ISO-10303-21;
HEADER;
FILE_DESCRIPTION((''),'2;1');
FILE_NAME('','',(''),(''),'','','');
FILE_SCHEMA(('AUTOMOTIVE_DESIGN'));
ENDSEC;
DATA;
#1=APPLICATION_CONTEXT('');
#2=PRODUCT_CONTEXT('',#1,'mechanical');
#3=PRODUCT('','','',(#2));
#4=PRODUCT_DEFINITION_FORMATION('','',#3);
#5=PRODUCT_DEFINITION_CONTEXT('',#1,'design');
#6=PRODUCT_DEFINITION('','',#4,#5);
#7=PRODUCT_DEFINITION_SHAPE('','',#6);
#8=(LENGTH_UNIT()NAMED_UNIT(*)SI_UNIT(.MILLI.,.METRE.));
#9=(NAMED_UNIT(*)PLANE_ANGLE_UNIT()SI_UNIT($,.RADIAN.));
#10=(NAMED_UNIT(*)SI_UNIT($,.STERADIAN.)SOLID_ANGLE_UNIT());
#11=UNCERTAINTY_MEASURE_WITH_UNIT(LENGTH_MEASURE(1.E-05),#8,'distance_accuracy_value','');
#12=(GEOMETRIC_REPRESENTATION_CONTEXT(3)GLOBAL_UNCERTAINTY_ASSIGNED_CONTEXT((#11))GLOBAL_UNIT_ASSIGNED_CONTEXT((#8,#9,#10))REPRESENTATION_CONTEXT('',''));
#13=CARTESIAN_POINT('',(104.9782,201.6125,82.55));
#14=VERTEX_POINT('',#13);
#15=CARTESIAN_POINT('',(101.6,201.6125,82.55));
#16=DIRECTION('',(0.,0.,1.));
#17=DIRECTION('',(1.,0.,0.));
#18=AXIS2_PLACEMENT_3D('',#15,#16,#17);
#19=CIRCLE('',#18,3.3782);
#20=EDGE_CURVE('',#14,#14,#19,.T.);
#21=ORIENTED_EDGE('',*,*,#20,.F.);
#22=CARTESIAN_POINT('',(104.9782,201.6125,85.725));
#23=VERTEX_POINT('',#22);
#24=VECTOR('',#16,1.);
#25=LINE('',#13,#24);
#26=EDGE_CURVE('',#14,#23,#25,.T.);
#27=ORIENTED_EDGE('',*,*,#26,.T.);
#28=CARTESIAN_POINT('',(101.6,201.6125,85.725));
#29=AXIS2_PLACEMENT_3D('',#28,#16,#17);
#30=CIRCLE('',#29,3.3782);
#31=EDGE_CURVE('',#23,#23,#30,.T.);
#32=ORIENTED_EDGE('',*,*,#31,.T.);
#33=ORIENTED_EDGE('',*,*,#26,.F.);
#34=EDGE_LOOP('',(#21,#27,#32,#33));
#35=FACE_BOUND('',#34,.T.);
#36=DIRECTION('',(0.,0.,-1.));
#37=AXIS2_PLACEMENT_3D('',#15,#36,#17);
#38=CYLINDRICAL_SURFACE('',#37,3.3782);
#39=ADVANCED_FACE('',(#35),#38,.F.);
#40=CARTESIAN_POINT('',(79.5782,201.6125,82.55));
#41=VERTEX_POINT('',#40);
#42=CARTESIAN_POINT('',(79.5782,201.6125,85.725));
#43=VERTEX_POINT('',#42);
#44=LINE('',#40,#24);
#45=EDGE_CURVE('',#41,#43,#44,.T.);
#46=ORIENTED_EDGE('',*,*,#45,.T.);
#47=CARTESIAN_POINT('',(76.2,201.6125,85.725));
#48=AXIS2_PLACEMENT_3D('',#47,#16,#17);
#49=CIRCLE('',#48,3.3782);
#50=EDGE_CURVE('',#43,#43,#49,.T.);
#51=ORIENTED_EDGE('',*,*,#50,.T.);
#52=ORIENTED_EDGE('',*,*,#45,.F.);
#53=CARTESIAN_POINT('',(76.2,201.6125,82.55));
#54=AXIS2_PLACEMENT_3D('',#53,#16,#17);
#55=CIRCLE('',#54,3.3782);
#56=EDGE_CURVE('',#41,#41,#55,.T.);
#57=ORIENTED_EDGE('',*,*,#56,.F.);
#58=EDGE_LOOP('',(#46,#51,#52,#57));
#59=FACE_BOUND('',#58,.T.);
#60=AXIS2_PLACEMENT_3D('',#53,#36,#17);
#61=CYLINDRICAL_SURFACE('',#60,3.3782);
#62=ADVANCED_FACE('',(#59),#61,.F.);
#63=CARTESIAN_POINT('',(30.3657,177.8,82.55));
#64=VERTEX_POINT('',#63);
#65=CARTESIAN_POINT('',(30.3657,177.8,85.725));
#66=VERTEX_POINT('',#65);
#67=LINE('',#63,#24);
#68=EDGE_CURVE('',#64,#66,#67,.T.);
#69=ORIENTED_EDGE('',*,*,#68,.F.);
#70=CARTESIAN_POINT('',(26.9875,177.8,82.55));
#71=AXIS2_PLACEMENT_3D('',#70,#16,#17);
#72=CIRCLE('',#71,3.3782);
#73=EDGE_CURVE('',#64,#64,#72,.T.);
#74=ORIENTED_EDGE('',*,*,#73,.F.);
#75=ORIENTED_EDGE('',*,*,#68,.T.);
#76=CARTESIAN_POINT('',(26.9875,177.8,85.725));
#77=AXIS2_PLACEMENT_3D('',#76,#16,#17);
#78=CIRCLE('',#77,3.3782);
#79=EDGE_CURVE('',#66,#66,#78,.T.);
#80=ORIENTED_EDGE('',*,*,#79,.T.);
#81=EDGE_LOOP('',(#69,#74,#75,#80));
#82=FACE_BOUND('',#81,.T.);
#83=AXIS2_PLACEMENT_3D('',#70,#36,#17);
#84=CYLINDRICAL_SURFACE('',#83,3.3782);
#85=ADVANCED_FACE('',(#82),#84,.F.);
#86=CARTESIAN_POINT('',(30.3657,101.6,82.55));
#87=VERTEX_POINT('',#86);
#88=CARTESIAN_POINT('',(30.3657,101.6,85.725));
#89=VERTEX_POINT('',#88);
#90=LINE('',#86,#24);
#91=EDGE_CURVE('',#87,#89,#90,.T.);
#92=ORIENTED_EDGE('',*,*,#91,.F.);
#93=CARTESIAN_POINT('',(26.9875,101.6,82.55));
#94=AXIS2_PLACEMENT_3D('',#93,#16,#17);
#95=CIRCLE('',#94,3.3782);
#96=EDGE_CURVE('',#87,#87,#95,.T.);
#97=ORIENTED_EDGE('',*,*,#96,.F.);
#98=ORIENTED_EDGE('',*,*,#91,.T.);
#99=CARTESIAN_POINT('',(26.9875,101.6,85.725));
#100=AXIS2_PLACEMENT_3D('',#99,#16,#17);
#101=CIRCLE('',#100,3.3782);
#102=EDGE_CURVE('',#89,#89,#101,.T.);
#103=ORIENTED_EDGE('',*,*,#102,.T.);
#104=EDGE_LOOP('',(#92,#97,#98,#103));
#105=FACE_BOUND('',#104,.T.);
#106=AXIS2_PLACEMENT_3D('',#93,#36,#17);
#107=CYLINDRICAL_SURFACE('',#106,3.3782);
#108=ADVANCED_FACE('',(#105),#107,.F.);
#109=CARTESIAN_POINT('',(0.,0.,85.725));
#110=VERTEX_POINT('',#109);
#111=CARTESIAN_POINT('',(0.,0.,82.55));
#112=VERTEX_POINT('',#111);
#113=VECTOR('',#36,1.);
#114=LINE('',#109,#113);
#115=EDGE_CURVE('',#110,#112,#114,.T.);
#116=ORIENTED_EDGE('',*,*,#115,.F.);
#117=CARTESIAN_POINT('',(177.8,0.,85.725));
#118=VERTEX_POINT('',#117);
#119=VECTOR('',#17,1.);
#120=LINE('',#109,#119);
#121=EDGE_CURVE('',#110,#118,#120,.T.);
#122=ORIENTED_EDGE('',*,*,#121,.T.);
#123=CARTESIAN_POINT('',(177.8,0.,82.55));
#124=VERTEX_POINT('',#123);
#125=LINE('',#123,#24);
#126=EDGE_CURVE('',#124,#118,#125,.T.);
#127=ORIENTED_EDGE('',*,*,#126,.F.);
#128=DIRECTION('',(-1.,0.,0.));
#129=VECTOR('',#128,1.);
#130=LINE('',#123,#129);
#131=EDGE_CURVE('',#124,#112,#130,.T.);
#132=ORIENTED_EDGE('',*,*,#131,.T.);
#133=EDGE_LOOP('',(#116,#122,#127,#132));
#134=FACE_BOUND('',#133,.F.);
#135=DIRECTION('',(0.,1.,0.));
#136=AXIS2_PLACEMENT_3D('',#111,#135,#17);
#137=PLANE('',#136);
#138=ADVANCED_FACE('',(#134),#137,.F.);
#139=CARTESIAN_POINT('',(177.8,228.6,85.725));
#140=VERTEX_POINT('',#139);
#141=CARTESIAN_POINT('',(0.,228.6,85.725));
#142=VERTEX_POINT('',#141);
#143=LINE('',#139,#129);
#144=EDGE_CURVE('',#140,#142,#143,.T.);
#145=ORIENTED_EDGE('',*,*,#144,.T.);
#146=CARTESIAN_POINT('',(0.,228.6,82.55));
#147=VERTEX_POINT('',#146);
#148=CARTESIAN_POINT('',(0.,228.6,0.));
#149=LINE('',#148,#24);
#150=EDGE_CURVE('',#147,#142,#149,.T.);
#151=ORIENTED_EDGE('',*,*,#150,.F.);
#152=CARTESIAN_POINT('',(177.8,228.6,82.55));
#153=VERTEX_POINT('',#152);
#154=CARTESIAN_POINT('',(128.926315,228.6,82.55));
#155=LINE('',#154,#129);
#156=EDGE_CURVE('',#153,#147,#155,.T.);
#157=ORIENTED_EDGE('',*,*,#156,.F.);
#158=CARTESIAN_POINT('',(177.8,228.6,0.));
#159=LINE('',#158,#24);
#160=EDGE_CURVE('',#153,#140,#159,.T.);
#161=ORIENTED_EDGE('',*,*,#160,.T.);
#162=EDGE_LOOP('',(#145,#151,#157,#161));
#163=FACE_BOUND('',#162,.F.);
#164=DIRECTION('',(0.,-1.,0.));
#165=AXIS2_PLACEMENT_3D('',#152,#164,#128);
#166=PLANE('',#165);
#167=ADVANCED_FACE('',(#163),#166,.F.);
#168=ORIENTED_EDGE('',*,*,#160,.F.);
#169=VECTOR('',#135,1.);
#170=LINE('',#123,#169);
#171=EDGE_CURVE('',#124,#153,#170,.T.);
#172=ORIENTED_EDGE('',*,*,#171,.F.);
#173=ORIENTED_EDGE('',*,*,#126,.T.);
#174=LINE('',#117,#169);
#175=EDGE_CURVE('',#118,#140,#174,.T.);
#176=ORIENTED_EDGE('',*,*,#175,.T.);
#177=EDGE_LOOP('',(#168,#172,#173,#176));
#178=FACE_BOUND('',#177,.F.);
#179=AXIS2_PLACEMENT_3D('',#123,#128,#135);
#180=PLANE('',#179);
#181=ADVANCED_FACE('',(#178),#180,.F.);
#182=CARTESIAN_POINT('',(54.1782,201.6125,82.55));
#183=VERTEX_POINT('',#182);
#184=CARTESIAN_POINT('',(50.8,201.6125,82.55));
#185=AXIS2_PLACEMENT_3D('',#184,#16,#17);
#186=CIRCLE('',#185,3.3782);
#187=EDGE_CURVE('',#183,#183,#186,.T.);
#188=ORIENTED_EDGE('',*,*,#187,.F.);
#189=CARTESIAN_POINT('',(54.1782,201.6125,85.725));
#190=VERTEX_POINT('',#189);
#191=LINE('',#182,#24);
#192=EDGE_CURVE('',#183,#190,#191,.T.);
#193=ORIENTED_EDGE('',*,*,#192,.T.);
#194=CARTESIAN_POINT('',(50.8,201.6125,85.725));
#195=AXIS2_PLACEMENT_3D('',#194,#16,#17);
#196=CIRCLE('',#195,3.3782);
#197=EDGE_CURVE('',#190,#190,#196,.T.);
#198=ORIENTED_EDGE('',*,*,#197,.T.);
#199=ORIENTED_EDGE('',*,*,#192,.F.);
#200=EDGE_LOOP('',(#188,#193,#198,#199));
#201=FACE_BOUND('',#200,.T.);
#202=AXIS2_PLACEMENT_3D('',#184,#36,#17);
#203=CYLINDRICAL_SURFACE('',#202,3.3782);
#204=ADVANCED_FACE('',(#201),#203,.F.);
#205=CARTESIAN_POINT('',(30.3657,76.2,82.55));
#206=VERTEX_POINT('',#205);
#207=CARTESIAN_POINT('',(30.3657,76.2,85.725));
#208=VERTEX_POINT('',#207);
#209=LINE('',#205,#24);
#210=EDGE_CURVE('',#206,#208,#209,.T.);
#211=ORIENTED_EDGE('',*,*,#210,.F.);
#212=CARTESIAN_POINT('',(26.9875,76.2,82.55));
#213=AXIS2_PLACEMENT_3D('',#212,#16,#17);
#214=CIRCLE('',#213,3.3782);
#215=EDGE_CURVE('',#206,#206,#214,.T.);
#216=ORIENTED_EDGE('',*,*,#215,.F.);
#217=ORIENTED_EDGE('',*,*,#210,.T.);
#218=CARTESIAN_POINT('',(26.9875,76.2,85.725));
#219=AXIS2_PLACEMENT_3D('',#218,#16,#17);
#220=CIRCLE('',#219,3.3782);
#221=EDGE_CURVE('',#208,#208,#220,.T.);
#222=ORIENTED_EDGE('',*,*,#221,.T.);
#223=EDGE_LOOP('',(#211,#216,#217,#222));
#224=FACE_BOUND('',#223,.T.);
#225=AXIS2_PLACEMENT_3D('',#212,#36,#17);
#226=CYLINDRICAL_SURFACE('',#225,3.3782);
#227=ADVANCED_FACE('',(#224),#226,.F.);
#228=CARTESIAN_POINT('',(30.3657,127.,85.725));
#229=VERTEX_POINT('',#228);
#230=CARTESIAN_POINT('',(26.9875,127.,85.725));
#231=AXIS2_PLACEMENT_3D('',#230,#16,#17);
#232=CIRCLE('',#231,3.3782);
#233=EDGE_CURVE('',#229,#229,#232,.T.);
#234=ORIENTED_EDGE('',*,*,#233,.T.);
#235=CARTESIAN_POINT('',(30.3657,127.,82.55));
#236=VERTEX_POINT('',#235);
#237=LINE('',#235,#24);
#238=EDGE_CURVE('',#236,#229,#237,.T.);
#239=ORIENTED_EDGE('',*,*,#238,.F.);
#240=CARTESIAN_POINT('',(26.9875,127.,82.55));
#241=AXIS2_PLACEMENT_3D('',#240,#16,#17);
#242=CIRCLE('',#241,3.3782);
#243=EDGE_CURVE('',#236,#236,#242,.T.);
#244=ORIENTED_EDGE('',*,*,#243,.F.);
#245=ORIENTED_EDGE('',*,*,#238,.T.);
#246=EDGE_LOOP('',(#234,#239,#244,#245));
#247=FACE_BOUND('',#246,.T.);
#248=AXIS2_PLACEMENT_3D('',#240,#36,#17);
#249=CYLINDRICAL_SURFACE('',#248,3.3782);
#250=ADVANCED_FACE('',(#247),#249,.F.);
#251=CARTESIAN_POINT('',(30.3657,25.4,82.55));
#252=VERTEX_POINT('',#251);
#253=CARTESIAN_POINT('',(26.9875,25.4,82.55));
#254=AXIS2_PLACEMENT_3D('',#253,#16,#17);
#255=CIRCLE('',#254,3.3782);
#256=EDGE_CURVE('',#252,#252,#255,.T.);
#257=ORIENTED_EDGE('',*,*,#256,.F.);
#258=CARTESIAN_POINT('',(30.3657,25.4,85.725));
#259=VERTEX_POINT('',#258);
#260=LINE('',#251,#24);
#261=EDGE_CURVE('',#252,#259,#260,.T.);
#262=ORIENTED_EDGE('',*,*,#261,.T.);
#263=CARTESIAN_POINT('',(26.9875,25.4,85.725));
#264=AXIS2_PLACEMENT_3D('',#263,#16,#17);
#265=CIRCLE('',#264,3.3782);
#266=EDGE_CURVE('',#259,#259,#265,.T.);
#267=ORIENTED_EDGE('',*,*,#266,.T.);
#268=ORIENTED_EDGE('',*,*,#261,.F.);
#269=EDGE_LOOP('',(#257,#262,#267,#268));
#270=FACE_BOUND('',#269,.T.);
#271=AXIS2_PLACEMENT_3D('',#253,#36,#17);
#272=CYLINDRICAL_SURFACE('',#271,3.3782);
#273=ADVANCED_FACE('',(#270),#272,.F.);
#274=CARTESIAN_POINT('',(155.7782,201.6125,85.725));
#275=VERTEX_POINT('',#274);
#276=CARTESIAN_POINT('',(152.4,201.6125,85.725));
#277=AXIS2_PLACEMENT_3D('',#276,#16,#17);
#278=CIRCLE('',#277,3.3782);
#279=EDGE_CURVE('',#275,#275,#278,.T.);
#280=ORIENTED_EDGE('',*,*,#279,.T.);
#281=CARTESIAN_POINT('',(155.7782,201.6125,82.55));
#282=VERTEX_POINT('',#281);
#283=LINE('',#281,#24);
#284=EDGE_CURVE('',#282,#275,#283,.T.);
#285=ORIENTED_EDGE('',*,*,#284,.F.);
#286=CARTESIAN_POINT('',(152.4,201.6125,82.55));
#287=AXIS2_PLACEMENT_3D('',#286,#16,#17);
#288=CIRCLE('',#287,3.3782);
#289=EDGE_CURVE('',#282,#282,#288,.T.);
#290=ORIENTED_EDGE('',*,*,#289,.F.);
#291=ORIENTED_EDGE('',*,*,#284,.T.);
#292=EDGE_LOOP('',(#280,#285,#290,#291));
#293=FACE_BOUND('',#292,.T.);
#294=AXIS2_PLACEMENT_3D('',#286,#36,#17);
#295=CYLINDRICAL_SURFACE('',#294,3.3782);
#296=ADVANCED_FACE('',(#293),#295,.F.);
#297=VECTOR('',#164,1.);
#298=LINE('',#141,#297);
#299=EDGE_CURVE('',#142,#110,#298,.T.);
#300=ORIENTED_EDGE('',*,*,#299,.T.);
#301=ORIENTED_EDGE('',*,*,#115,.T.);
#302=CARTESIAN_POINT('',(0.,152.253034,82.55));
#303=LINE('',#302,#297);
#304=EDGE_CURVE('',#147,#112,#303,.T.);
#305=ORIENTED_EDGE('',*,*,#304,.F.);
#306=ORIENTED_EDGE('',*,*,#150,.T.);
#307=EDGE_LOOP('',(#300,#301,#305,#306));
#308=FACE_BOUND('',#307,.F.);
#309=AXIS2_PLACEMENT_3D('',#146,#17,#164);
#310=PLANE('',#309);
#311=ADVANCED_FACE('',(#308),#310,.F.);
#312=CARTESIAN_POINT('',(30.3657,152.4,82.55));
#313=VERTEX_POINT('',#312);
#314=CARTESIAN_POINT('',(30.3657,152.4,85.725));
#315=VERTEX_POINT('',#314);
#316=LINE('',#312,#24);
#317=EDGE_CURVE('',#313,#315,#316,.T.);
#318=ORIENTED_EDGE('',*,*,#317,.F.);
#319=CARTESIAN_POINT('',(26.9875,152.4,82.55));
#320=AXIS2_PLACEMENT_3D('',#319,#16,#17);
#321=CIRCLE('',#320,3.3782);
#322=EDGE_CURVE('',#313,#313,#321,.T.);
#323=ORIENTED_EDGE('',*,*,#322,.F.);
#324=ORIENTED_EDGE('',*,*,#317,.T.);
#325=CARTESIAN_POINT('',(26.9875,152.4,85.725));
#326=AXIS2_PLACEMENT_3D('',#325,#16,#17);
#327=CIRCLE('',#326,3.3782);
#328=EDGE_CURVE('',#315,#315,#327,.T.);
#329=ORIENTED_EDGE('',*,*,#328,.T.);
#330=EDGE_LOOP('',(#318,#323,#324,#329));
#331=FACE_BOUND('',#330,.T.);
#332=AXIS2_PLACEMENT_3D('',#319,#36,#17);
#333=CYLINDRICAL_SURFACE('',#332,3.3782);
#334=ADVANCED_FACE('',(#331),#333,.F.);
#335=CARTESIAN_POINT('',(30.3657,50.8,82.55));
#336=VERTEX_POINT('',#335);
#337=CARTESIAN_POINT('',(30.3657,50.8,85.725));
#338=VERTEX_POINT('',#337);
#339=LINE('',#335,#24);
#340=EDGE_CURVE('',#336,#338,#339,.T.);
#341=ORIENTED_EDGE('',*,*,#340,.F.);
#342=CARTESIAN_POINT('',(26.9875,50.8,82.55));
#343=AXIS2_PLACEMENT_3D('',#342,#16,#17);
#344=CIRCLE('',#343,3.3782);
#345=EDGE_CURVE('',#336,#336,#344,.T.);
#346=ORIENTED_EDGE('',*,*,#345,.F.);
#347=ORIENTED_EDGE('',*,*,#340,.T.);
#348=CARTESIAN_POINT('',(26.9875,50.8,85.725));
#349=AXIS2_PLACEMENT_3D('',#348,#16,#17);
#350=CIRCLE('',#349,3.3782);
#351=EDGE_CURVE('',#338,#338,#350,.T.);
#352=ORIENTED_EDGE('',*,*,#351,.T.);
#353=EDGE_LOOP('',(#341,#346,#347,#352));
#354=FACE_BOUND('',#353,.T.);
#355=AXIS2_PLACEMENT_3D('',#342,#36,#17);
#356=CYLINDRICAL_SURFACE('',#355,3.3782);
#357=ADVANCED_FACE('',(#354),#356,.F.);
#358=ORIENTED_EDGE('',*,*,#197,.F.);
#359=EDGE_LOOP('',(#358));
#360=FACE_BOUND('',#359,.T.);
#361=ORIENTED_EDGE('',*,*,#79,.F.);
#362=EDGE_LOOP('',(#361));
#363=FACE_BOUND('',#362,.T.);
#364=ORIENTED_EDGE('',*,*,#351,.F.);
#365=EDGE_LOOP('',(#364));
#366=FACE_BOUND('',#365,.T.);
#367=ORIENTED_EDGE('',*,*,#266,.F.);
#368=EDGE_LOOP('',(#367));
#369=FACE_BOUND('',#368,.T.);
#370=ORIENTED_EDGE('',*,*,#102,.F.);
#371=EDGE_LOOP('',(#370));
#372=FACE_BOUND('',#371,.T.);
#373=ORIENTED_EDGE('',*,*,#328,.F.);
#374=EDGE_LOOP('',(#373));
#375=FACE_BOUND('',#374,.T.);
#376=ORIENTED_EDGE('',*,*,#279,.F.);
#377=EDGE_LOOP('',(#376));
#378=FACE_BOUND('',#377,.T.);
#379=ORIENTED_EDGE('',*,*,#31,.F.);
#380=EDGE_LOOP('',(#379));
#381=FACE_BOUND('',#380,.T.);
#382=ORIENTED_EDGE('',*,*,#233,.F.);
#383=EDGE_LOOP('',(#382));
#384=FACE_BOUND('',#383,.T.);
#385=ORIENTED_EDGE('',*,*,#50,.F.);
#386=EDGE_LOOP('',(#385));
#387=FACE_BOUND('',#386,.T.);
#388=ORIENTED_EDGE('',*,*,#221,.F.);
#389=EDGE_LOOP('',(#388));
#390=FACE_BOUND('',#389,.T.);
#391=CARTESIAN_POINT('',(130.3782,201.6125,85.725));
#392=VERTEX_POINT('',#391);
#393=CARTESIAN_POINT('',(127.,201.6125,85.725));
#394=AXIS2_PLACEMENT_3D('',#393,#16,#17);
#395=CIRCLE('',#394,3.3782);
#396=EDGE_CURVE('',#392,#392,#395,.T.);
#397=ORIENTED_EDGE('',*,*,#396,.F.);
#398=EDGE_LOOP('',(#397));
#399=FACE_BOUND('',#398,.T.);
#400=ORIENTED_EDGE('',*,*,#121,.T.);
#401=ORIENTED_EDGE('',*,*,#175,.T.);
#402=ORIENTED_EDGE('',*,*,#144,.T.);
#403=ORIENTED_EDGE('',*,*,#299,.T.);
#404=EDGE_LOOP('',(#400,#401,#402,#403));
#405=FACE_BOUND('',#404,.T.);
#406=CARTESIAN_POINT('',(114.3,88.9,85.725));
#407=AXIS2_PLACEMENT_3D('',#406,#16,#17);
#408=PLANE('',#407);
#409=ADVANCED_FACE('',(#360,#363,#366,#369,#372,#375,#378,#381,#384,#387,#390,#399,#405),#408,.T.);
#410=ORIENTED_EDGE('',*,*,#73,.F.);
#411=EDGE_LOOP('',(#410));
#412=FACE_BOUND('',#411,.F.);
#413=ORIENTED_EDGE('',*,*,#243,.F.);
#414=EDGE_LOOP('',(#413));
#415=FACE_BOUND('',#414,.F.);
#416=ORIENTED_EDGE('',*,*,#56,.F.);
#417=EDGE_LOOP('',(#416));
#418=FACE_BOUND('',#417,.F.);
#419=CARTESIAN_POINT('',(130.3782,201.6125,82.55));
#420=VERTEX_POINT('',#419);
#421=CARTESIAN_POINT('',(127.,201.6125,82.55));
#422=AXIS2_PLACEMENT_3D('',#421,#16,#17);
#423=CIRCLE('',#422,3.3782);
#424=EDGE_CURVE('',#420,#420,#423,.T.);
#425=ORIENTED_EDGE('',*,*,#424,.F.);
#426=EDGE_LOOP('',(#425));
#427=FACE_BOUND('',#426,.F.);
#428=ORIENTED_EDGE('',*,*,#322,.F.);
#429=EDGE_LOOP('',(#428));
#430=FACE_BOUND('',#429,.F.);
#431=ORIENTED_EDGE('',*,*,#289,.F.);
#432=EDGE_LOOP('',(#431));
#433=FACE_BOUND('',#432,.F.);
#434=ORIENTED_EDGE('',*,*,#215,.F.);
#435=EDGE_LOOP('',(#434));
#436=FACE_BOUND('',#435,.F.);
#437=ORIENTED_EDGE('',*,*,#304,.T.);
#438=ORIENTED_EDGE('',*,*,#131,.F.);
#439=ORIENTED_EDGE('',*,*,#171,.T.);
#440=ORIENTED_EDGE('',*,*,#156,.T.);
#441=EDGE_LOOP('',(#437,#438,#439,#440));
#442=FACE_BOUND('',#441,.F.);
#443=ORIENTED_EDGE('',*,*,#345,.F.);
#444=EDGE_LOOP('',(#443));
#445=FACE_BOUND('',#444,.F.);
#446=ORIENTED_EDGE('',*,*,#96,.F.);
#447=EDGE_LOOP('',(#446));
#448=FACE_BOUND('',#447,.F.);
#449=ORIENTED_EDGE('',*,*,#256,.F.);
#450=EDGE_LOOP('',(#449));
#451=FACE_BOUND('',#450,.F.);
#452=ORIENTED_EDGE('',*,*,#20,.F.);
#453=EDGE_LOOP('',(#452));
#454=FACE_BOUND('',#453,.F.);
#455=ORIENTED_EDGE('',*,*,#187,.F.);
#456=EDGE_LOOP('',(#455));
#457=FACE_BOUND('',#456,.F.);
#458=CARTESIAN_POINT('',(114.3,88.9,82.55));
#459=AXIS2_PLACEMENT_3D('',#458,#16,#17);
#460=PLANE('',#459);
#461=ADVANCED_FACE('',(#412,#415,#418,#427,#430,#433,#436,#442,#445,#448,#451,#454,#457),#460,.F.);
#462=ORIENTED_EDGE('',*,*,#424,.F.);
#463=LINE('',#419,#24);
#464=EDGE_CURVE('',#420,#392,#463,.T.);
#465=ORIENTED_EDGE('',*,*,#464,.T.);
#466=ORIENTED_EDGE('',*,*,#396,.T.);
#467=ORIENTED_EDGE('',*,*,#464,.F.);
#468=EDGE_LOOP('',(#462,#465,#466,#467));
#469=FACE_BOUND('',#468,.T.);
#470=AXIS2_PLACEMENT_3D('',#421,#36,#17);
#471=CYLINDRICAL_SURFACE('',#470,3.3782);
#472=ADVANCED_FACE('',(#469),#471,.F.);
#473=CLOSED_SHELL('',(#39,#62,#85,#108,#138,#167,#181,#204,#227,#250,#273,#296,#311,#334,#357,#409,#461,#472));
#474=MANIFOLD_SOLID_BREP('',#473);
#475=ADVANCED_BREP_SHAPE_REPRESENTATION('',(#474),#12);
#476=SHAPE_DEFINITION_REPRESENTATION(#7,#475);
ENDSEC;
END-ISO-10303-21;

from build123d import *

# Parameters (mm, degrees)
F0_W      = 50.8
F0_H      = 177.8
F1_DEPTH  = 3.175
F3_DEPTH  = 76.2
F5_DEPTH  = 3.175
F7_D      = 6.7564
F7_DEPTH  = 29.21
F7_TIP    = 2.0298273432
F8_W      = 127
F8_H      = 177.8
F8_R      = 3.3782
F9_DEPTH  = 3.175
F10_W     = 247.0957003534
F10_H     = 423.9609837532
F11_DEPTH = 82.55


# Not quite as in the source:
# - an extrude ends at something that could not be found from the text; its depth is read off the source's solid


with BuildPart() as f1:
    # F0 (on Top) → F1 (new body)
    with BuildSketch(Plane.XY):
        Polygon((0, 228.6), (0, 177.8), (50.8, 177.8), (177.8, 177.8), (177.8, 228.6), align=None)
        with Locations((25.4, 88.9)):
            Rectangle(F0_W, F0_H)
    extrude(amount=F1_DEPTH)

    # F2 (on face) → F3 (join)
    with BuildSketch(Plane.XY.offset(3.175)):
        Polygon((3.175, 0), (3.175, 225.425), (177.8, 225.425), (177.8, 228.6), (0, 228.6), (0, 0), align=None)
    extrude(amount=F3_DEPTH)

    # F4 (on face) → F5 (join)
    with BuildSketch(Plane.XY.offset(79.375)):
        Polygon((177.8, 228.6), (0, 228.6), (0, 0), (3.175, 0), (3.175, 225.425), (177.8, 225.425), align=None)
        Polygon((177.8, 177.8), (177.8, 225.425), (3.175, 225.425), (3.175, 0), (50.8, 0), (50.8, 177.8), align=None)
    extrude(amount=F5_DEPTH)

    # F7
    with Locations(Plane.XY.offset(82.55)):
        with Locations((26.9875, 25.4), (26.9875, 50.8), (26.9875, 76.2), (26.9875, 101.6), (26.9875, 127), (26.9875, 152.4), (26.9875, 177.8), (50.8, 201.6125), (76.2, 201.6125), (101.6, 201.6125), (127, 201.6125), (152.4, 201.6125)):
            Hole(F7_D / 2, depth=F7_DEPTH)
            with Locations((0, 0, -(F7_DEPTH + F7_TIP / 2))):  # 118° drill point
                Cone(0, F7_D / 2, F7_TIP, mode=Mode.SUBTRACT)

    # F8 (on face) → F9 (join)
    with BuildSketch(Plane.XY.offset(82.55)):
        with Locations((114.3, 88.9)):
            Rectangle(F8_W, F8_H)
        Polygon((0, 228.6), (0, 0), (50.8, 0), (50.8, 177.8), (177.8, 177.8), (177.8, 228.6), align=None)
        with Locations((26.9875, 25.4)):
            Circle(F8_R, mode=Mode.SUBTRACT)
        with Locations((26.9875, 50.8)):
            Circle(F8_R, mode=Mode.SUBTRACT)
        with Locations((26.9875, 76.2)):
            Circle(F8_R, mode=Mode.SUBTRACT)
        with Locations((26.9875, 101.6)):
            Circle(F8_R, mode=Mode.SUBTRACT)
        with Locations((26.9875, 127)):
            Circle(F8_R, mode=Mode.SUBTRACT)
        with Locations((26.9875, 152.4)):
            Circle(F8_R, mode=Mode.SUBTRACT)
        with Locations((26.9875, 177.8)):
            Circle(F8_R, mode=Mode.SUBTRACT)
        with Locations((50.8, 201.6125)):
            Circle(F8_R, mode=Mode.SUBTRACT)
        with Locations((76.2, 201.6125)):
            Circle(F8_R, mode=Mode.SUBTRACT)
        with Locations((101.6, 201.6125)):
            Circle(F8_R, mode=Mode.SUBTRACT)
        with Locations((127, 201.6125)):
            Circle(F8_R, mode=Mode.SUBTRACT)
        with Locations((152.4, 201.6125)):
            Circle(F8_R, mode=Mode.SUBTRACT)
    extrude(amount=F9_DEPTH)

    # F10 (on Top) → F11 (cut, through all)
    with BuildSketch(Plane.XY):
        with Locations((80.0526309758, 75.9060680866)):
            Rectangle(F10_W, F10_H)
    extrude(amount=F11_DEPTH, mode=Mode.SUBTRACT)


solid = f1.part
